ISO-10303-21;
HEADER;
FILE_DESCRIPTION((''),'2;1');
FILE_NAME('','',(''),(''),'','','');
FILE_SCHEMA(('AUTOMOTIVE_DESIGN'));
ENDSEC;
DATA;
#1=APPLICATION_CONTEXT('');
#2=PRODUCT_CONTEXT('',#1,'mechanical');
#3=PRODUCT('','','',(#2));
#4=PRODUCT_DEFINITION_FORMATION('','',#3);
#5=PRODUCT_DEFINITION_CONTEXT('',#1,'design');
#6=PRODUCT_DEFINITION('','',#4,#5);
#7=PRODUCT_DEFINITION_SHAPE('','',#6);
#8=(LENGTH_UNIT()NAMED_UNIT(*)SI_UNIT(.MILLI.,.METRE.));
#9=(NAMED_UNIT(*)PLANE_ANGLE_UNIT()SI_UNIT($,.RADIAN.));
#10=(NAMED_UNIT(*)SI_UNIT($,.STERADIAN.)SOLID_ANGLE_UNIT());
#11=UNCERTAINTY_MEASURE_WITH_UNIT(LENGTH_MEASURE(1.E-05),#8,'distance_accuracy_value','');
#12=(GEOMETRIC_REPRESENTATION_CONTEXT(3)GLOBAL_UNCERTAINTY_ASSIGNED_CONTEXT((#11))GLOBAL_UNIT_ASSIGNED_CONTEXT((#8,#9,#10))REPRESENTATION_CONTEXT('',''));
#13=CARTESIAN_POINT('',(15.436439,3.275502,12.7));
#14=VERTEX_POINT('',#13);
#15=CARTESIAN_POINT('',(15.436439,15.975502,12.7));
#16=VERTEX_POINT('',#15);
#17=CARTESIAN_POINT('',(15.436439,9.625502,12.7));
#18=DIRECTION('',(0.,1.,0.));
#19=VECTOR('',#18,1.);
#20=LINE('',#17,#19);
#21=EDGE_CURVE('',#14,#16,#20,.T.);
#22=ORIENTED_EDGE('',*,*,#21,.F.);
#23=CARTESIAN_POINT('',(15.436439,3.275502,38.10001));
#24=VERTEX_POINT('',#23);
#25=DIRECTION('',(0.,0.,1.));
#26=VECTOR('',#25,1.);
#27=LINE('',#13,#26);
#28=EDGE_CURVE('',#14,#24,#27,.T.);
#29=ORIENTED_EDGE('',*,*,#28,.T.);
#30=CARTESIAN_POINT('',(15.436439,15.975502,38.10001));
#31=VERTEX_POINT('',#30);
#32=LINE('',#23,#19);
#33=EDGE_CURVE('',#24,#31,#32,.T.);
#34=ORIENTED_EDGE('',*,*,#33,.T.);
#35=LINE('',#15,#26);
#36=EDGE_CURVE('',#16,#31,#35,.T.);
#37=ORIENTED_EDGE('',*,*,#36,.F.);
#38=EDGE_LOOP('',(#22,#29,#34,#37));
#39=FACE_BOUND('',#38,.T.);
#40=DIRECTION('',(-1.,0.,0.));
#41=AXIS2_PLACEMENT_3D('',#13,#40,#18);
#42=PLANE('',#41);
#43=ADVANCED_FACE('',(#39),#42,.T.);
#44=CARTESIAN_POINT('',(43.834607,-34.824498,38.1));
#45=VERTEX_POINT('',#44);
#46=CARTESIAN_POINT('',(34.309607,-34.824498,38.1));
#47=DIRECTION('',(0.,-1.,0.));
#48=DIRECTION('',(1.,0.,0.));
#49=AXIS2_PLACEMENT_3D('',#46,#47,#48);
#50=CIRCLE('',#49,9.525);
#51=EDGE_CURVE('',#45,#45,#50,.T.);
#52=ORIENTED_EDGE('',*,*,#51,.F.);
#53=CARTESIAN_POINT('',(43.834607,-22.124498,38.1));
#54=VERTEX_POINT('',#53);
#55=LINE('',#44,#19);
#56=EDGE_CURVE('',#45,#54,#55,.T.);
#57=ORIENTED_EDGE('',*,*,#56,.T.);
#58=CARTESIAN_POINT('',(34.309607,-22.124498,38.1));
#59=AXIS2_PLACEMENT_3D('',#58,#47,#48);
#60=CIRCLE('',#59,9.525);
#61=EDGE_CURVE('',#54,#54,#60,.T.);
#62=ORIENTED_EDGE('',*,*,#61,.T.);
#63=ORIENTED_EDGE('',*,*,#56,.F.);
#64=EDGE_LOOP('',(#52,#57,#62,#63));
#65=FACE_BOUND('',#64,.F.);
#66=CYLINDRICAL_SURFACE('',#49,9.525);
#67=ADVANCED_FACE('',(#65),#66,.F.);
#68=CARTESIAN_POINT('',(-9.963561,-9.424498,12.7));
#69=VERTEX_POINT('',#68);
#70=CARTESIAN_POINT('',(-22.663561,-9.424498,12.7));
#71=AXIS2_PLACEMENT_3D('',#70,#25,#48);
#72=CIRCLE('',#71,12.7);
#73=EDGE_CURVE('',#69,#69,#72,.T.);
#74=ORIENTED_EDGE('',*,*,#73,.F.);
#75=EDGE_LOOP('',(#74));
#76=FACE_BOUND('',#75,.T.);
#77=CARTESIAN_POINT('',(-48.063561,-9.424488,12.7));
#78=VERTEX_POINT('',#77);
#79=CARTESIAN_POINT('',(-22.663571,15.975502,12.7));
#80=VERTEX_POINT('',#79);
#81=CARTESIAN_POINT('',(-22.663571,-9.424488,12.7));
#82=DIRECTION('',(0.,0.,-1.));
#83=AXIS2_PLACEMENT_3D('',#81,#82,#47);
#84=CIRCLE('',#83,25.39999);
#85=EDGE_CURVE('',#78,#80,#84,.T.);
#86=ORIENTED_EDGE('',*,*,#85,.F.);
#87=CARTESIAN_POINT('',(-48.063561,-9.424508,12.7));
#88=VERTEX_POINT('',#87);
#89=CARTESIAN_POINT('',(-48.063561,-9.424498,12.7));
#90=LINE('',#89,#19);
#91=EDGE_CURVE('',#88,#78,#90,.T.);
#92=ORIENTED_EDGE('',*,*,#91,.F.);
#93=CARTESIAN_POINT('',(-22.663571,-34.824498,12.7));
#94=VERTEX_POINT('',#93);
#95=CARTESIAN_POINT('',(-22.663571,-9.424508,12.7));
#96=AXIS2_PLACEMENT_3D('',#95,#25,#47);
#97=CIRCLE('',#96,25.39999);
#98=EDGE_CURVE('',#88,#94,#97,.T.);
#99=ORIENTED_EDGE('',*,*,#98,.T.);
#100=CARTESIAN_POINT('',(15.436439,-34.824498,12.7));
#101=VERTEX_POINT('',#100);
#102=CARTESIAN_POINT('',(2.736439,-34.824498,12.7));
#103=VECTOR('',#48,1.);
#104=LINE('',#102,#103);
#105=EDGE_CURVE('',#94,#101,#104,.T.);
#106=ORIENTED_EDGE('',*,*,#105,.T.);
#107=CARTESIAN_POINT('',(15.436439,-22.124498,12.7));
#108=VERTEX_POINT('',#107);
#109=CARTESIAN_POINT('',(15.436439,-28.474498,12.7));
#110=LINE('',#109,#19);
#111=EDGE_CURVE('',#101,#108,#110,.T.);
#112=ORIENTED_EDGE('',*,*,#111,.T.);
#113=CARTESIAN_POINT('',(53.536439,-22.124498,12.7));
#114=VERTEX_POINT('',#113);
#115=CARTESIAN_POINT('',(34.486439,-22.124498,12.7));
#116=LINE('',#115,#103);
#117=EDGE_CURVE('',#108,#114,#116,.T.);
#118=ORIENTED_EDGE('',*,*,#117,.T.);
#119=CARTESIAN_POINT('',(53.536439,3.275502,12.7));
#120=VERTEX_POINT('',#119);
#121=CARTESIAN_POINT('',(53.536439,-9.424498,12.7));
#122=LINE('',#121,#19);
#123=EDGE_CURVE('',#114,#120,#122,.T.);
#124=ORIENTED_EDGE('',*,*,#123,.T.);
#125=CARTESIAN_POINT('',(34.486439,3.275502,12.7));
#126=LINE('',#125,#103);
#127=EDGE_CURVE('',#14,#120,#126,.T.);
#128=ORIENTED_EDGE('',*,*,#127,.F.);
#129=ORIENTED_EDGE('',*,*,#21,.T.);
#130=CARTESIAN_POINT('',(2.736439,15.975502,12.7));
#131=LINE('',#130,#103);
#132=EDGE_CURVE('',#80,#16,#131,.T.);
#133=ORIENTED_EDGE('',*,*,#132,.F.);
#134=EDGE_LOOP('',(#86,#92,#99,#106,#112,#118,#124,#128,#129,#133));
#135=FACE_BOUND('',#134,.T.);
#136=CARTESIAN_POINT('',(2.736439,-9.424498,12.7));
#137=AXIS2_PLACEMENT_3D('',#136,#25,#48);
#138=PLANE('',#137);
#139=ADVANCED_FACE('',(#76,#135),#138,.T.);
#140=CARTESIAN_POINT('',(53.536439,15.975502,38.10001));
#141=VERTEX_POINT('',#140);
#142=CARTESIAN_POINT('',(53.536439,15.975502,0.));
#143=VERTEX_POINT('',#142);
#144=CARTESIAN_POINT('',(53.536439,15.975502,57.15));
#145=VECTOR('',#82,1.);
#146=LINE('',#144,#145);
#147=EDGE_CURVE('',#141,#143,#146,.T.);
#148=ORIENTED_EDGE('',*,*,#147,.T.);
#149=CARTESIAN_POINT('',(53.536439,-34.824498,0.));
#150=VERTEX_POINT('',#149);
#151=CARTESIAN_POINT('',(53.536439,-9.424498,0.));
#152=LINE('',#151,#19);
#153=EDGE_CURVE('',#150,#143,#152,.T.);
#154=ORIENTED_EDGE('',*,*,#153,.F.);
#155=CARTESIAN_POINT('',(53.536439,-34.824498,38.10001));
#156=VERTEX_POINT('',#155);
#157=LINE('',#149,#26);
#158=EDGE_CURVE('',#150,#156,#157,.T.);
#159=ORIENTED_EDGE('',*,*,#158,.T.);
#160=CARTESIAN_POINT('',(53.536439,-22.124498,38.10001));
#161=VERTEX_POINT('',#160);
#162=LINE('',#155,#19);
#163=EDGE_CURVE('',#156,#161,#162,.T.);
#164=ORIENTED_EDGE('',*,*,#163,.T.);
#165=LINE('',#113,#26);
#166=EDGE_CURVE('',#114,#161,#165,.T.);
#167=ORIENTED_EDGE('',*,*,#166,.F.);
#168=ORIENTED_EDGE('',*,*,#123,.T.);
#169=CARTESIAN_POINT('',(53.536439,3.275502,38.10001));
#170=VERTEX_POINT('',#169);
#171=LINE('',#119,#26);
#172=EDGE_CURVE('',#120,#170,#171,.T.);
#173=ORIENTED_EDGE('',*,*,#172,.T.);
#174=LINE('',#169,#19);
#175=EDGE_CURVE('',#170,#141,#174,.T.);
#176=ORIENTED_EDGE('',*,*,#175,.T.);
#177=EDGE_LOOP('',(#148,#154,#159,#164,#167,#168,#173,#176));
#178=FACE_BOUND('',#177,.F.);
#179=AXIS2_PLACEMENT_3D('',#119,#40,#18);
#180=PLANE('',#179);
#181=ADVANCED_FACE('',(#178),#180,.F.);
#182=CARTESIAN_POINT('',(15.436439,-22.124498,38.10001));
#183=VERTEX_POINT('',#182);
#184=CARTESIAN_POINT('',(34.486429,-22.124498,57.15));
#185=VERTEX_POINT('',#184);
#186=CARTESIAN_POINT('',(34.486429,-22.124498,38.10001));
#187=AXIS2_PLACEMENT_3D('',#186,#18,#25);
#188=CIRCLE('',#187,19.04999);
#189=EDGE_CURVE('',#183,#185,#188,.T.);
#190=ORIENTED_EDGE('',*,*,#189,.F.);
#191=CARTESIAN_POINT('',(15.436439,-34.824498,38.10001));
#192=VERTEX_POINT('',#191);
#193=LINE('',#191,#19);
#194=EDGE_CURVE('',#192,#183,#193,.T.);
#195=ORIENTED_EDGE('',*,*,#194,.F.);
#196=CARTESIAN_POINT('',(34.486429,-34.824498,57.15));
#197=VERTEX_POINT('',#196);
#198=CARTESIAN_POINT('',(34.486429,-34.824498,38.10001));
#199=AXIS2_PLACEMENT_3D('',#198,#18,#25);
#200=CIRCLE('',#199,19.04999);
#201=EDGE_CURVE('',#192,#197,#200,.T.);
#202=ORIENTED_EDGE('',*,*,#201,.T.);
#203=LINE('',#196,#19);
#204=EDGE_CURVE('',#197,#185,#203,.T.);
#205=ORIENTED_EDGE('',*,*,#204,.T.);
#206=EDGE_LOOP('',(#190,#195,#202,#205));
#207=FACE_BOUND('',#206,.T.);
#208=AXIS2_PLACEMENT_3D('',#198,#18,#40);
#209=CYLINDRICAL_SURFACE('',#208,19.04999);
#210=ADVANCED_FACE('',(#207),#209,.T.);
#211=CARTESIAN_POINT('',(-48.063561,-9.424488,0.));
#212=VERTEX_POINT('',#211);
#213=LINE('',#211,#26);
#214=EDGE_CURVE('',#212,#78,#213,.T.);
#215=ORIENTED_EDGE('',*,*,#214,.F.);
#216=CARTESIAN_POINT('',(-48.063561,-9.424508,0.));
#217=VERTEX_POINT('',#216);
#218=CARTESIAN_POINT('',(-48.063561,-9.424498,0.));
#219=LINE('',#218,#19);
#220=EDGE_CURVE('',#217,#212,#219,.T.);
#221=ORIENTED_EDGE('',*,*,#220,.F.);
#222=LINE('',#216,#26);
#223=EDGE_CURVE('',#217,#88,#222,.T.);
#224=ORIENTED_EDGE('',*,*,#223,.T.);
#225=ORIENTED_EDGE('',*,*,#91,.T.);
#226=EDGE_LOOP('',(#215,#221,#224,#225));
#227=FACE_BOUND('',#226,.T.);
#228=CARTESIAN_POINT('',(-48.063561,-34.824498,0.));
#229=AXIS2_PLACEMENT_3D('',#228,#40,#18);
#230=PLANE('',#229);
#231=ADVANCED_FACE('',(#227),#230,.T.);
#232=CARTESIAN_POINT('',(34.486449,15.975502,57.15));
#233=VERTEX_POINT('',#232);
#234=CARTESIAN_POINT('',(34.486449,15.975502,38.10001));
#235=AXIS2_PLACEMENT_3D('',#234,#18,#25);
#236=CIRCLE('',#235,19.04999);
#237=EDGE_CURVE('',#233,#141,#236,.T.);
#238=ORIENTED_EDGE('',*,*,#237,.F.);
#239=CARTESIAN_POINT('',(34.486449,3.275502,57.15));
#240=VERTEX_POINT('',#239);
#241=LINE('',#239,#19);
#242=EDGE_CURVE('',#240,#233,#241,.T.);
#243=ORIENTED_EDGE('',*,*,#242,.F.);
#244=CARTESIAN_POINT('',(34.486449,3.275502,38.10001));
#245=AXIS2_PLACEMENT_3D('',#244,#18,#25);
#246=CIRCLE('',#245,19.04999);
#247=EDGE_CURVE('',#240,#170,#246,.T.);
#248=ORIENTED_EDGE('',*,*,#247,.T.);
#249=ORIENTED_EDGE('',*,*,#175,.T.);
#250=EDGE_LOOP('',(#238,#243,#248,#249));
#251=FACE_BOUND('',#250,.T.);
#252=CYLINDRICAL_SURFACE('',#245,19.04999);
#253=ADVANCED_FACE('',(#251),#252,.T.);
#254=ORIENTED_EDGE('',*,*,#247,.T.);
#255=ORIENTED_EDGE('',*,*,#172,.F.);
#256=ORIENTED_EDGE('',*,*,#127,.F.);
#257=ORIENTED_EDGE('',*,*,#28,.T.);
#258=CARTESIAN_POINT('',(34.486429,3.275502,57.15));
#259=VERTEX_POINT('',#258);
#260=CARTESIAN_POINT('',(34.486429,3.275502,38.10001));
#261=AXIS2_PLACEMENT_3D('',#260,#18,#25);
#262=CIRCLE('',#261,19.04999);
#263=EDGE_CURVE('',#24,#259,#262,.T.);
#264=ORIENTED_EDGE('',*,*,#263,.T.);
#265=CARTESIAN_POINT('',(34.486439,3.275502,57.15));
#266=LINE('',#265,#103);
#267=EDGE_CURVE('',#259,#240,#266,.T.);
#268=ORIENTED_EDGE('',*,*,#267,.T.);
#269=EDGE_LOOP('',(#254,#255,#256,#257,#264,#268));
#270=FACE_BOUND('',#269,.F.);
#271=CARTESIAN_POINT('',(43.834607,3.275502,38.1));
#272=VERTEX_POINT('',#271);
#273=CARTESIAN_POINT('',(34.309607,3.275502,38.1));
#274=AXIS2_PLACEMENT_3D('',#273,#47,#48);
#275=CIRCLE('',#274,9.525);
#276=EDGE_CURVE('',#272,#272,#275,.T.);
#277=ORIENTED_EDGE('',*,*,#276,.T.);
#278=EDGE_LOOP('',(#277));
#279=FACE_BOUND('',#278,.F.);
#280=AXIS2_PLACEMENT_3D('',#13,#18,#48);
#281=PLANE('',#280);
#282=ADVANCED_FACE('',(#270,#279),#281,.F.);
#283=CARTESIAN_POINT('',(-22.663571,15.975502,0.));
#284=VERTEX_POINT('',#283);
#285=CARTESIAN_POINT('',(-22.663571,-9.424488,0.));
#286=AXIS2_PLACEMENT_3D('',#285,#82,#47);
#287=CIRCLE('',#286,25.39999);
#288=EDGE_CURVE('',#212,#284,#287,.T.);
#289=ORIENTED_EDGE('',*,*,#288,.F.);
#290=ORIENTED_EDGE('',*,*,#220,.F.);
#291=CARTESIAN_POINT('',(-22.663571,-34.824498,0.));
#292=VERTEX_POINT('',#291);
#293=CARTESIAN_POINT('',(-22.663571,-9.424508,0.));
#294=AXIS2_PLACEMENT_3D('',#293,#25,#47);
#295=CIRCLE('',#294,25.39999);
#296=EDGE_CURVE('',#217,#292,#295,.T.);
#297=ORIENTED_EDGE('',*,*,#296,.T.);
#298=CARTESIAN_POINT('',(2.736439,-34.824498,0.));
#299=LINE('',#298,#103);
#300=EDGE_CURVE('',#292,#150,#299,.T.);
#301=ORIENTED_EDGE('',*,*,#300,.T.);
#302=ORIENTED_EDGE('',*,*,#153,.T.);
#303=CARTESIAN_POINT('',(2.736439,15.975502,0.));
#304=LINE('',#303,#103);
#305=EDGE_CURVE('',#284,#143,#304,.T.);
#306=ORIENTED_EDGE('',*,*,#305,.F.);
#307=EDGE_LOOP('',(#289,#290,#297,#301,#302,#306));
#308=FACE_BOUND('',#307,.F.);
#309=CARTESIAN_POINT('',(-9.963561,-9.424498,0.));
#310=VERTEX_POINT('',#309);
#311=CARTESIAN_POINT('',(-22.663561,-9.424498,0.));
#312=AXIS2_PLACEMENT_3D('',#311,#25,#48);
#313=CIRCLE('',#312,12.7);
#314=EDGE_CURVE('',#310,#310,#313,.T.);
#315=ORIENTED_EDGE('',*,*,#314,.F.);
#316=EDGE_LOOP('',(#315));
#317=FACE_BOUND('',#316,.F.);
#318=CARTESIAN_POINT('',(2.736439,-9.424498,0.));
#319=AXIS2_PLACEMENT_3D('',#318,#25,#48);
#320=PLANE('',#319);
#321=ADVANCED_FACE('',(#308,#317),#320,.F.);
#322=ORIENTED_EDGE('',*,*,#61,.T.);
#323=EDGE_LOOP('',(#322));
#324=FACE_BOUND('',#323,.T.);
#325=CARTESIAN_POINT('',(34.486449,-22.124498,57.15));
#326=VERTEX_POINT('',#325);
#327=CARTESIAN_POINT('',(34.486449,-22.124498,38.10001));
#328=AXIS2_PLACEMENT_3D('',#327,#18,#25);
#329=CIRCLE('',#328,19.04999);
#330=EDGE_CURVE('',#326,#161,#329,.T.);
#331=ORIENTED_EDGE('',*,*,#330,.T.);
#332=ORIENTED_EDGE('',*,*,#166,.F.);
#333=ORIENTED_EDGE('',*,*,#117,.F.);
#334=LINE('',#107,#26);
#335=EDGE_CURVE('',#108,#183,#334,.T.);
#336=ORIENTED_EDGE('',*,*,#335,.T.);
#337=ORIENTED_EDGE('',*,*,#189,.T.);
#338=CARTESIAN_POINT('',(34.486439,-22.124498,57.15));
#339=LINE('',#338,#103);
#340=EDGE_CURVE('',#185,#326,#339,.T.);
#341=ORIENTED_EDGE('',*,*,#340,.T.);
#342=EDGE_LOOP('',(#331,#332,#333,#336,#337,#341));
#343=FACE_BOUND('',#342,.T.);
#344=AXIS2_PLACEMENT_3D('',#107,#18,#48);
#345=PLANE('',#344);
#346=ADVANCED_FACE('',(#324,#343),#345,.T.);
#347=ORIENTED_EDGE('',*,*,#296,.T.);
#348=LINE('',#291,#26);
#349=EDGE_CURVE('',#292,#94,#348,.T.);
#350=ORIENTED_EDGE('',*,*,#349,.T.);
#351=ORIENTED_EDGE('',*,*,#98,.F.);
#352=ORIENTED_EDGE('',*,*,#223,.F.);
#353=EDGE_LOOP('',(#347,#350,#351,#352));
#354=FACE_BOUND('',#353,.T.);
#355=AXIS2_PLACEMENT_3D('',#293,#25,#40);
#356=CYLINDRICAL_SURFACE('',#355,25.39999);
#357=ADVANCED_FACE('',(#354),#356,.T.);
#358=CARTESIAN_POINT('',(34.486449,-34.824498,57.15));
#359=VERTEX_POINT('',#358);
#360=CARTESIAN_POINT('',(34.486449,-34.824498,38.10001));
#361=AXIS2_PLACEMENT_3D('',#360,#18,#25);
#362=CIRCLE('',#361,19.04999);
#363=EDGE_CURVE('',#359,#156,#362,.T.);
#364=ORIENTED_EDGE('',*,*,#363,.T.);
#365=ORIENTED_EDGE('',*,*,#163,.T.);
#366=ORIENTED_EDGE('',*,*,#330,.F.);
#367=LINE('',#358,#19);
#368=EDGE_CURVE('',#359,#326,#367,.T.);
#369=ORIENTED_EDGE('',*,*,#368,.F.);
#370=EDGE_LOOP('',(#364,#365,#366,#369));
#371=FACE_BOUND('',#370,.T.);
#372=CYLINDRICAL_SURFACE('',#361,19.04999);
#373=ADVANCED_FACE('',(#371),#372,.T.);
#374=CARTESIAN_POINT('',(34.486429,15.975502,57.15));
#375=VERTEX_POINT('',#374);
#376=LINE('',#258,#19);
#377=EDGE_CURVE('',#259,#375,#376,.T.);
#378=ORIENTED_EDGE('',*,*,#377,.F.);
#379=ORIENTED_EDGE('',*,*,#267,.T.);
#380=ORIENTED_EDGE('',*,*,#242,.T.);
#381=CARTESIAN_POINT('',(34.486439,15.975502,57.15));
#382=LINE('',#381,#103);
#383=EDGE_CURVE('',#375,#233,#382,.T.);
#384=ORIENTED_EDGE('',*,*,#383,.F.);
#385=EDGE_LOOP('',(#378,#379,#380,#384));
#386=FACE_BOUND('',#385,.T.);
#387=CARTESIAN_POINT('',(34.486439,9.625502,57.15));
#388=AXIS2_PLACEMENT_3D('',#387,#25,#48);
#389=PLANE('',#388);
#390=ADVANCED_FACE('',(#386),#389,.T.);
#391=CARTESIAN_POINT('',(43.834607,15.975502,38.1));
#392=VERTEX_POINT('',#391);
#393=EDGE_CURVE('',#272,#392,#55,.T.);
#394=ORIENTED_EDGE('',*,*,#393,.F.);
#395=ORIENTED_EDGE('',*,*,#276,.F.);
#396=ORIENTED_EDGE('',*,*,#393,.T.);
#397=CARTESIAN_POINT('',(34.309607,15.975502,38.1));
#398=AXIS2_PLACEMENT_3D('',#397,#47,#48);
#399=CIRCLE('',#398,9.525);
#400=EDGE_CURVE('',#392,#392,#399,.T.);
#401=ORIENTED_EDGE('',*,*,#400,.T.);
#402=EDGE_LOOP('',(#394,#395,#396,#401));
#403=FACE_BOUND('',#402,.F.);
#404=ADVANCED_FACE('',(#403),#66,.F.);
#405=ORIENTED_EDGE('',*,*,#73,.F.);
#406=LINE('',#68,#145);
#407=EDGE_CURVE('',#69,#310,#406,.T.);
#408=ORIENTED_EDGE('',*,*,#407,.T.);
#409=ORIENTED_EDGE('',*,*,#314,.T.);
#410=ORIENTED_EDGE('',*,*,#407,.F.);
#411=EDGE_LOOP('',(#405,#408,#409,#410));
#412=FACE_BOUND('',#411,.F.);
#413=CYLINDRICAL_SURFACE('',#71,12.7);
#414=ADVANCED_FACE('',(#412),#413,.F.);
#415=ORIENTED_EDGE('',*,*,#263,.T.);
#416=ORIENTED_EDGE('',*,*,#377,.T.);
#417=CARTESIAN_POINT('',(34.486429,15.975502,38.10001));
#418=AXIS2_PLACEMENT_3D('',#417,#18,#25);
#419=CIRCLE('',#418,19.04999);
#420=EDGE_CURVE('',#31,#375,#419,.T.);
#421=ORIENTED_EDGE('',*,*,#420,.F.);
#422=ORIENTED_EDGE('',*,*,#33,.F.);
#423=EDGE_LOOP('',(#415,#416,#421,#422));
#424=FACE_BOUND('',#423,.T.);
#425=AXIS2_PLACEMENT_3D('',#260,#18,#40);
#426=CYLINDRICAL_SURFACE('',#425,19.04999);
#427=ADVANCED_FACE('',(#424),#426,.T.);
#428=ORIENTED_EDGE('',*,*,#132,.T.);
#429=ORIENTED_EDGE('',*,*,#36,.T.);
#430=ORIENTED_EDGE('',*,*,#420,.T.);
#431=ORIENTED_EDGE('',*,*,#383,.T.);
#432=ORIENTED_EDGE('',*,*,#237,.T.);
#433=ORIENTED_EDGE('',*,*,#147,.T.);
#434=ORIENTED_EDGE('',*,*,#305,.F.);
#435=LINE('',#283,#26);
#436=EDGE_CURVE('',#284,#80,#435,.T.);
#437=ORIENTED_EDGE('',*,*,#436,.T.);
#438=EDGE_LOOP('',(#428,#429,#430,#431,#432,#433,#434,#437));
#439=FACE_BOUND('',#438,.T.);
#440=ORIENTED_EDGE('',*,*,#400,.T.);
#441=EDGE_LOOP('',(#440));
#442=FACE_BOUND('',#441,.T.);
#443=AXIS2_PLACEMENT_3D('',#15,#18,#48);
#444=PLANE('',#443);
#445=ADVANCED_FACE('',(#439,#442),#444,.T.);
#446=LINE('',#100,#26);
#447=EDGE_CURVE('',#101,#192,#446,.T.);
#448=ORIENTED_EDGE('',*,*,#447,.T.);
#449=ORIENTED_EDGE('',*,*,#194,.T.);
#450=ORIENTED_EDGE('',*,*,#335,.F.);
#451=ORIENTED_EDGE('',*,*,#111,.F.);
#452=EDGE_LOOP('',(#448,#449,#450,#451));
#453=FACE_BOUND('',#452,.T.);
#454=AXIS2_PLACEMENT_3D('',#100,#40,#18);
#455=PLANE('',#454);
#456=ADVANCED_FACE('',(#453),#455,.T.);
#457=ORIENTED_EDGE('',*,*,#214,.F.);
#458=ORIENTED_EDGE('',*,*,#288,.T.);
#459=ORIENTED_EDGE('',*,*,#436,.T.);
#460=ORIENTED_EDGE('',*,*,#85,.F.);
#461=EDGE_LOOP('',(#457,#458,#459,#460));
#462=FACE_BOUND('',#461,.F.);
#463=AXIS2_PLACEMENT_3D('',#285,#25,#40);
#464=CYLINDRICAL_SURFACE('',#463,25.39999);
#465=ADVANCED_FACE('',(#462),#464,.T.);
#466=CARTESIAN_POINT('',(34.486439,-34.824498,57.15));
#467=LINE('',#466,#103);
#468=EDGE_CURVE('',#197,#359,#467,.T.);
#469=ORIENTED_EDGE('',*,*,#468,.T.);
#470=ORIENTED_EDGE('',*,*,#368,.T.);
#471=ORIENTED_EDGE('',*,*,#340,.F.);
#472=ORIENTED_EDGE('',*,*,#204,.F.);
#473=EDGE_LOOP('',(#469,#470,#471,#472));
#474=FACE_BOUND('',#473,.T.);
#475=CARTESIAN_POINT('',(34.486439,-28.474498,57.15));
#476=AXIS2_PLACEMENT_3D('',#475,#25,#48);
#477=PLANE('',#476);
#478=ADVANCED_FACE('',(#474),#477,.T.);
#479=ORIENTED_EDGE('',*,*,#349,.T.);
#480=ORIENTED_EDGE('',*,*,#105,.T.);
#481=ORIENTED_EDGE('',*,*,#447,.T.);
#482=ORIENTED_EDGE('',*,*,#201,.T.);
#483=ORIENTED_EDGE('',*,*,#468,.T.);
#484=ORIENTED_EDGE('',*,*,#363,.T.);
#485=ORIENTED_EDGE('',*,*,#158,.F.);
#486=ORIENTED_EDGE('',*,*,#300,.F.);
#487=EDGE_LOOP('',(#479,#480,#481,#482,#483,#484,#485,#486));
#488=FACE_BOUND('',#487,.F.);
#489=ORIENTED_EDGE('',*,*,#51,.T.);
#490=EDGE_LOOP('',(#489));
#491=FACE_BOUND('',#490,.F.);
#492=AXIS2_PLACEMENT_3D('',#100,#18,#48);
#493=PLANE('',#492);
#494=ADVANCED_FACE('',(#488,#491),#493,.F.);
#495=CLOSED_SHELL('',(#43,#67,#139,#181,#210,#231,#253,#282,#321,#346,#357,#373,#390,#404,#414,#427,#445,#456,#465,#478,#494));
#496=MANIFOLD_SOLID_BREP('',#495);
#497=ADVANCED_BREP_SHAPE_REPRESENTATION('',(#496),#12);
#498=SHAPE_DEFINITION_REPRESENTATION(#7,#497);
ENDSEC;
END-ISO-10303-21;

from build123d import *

# Parameters (mm, degrees)
F0_W      = 101.6
F0_H      = 50.8
F1_DEPTH  = 12.7
F2_R      = 25.39999
F3_R      = 12.7
F4_DEPTH  = 12.701
F5_W      = 38.1
F5_H      = 12.7
F6_DEPTH  = 44.45
F7_R      = 19.04999
F8_W      = 38.1
F8_H      = 12.7
F9_DEPTH  = 44.45
F10_R     = 19.04999
F11_R     = 9.525
F12_DEPTH = 50.801


# Not quite as in the source:
# - a fillet or chamfer is up to 0.001 mm smaller than in the source, because OpenCascade refuses the exact size


with BuildPart() as f1:
    # F0 (on Top) → F1 (new body)
    with BuildSketch(Plane.XY):
        with Locations((2.7364386797, -9.4244979978)):
            Rectangle(F0_W, F0_H)
    extrude(amount=F1_DEPTH)

    # F2 (radius 25.4 in the source; OpenCascade refuses exactly that, so slightly less here)
    f2_edges = [f1.edges().sort_by_distance(p)[0] for p in [
        (-48.063561, 15.975502, 6.35),
        (-48.063561, -34.824498, 6.35),
    ]]
    fillet(f2_edges, radius=F2_R)

    # F3 (on face) → F4 (cut, through all)
    with BuildSketch(Plane.XY.offset(12.7)):
        with Locations((-22.6635613203, -9.4244979978)):
            Circle(F3_R)
    extrude(amount=-F4_DEPTH, mode=Mode.SUBTRACT)

    # F5 (on face) → F6 (join)
    with BuildSketch(Plane.XY.offset(12.7)):
        with Locations((34.4864386797, -28.4744979978)):
            Rectangle(F5_W, F5_H)
    extrude(amount=F6_DEPTH)

    # F7 (radius 19.05 in the source; OpenCascade refuses exactly that, so slightly less here)
    f7_edges = [f1.edges().sort_by_distance(p)[0] for p in [
        (15.436439, -28.474498, 57.15),
        (53.536439, -28.474498, 57.15),
    ]]
    fillet(f7_edges, radius=F7_R)

    # F8 (on face) → F9 (join)
    with BuildSketch(Plane.XY.offset(12.7)):
        with Locations((34.4864386797, 9.6255020022)):
            Rectangle(F8_W, F8_H)
    extrude(amount=F9_DEPTH)

    # F10 (radius 19.05 in the source; OpenCascade refuses exactly that, so slightly less here)
    f10_edges = [f1.edges().sort_by_distance(p)[0] for p in [
        (15.436439, 9.625502, 57.15),
        (53.536439, 9.625502, 57.15),
    ]]
    fillet(f10_edges, radius=F10_R)

    # F11 (on face) → F12 (cut, through all)
    with BuildSketch(Plane.XZ.offset(34.8244979978)):
        with Locations((34.3096069992, 38.1)):
            Circle(F11_R)
    extrude(amount=-F12_DEPTH, mode=Mode.SUBTRACT)


solid = f1.part
